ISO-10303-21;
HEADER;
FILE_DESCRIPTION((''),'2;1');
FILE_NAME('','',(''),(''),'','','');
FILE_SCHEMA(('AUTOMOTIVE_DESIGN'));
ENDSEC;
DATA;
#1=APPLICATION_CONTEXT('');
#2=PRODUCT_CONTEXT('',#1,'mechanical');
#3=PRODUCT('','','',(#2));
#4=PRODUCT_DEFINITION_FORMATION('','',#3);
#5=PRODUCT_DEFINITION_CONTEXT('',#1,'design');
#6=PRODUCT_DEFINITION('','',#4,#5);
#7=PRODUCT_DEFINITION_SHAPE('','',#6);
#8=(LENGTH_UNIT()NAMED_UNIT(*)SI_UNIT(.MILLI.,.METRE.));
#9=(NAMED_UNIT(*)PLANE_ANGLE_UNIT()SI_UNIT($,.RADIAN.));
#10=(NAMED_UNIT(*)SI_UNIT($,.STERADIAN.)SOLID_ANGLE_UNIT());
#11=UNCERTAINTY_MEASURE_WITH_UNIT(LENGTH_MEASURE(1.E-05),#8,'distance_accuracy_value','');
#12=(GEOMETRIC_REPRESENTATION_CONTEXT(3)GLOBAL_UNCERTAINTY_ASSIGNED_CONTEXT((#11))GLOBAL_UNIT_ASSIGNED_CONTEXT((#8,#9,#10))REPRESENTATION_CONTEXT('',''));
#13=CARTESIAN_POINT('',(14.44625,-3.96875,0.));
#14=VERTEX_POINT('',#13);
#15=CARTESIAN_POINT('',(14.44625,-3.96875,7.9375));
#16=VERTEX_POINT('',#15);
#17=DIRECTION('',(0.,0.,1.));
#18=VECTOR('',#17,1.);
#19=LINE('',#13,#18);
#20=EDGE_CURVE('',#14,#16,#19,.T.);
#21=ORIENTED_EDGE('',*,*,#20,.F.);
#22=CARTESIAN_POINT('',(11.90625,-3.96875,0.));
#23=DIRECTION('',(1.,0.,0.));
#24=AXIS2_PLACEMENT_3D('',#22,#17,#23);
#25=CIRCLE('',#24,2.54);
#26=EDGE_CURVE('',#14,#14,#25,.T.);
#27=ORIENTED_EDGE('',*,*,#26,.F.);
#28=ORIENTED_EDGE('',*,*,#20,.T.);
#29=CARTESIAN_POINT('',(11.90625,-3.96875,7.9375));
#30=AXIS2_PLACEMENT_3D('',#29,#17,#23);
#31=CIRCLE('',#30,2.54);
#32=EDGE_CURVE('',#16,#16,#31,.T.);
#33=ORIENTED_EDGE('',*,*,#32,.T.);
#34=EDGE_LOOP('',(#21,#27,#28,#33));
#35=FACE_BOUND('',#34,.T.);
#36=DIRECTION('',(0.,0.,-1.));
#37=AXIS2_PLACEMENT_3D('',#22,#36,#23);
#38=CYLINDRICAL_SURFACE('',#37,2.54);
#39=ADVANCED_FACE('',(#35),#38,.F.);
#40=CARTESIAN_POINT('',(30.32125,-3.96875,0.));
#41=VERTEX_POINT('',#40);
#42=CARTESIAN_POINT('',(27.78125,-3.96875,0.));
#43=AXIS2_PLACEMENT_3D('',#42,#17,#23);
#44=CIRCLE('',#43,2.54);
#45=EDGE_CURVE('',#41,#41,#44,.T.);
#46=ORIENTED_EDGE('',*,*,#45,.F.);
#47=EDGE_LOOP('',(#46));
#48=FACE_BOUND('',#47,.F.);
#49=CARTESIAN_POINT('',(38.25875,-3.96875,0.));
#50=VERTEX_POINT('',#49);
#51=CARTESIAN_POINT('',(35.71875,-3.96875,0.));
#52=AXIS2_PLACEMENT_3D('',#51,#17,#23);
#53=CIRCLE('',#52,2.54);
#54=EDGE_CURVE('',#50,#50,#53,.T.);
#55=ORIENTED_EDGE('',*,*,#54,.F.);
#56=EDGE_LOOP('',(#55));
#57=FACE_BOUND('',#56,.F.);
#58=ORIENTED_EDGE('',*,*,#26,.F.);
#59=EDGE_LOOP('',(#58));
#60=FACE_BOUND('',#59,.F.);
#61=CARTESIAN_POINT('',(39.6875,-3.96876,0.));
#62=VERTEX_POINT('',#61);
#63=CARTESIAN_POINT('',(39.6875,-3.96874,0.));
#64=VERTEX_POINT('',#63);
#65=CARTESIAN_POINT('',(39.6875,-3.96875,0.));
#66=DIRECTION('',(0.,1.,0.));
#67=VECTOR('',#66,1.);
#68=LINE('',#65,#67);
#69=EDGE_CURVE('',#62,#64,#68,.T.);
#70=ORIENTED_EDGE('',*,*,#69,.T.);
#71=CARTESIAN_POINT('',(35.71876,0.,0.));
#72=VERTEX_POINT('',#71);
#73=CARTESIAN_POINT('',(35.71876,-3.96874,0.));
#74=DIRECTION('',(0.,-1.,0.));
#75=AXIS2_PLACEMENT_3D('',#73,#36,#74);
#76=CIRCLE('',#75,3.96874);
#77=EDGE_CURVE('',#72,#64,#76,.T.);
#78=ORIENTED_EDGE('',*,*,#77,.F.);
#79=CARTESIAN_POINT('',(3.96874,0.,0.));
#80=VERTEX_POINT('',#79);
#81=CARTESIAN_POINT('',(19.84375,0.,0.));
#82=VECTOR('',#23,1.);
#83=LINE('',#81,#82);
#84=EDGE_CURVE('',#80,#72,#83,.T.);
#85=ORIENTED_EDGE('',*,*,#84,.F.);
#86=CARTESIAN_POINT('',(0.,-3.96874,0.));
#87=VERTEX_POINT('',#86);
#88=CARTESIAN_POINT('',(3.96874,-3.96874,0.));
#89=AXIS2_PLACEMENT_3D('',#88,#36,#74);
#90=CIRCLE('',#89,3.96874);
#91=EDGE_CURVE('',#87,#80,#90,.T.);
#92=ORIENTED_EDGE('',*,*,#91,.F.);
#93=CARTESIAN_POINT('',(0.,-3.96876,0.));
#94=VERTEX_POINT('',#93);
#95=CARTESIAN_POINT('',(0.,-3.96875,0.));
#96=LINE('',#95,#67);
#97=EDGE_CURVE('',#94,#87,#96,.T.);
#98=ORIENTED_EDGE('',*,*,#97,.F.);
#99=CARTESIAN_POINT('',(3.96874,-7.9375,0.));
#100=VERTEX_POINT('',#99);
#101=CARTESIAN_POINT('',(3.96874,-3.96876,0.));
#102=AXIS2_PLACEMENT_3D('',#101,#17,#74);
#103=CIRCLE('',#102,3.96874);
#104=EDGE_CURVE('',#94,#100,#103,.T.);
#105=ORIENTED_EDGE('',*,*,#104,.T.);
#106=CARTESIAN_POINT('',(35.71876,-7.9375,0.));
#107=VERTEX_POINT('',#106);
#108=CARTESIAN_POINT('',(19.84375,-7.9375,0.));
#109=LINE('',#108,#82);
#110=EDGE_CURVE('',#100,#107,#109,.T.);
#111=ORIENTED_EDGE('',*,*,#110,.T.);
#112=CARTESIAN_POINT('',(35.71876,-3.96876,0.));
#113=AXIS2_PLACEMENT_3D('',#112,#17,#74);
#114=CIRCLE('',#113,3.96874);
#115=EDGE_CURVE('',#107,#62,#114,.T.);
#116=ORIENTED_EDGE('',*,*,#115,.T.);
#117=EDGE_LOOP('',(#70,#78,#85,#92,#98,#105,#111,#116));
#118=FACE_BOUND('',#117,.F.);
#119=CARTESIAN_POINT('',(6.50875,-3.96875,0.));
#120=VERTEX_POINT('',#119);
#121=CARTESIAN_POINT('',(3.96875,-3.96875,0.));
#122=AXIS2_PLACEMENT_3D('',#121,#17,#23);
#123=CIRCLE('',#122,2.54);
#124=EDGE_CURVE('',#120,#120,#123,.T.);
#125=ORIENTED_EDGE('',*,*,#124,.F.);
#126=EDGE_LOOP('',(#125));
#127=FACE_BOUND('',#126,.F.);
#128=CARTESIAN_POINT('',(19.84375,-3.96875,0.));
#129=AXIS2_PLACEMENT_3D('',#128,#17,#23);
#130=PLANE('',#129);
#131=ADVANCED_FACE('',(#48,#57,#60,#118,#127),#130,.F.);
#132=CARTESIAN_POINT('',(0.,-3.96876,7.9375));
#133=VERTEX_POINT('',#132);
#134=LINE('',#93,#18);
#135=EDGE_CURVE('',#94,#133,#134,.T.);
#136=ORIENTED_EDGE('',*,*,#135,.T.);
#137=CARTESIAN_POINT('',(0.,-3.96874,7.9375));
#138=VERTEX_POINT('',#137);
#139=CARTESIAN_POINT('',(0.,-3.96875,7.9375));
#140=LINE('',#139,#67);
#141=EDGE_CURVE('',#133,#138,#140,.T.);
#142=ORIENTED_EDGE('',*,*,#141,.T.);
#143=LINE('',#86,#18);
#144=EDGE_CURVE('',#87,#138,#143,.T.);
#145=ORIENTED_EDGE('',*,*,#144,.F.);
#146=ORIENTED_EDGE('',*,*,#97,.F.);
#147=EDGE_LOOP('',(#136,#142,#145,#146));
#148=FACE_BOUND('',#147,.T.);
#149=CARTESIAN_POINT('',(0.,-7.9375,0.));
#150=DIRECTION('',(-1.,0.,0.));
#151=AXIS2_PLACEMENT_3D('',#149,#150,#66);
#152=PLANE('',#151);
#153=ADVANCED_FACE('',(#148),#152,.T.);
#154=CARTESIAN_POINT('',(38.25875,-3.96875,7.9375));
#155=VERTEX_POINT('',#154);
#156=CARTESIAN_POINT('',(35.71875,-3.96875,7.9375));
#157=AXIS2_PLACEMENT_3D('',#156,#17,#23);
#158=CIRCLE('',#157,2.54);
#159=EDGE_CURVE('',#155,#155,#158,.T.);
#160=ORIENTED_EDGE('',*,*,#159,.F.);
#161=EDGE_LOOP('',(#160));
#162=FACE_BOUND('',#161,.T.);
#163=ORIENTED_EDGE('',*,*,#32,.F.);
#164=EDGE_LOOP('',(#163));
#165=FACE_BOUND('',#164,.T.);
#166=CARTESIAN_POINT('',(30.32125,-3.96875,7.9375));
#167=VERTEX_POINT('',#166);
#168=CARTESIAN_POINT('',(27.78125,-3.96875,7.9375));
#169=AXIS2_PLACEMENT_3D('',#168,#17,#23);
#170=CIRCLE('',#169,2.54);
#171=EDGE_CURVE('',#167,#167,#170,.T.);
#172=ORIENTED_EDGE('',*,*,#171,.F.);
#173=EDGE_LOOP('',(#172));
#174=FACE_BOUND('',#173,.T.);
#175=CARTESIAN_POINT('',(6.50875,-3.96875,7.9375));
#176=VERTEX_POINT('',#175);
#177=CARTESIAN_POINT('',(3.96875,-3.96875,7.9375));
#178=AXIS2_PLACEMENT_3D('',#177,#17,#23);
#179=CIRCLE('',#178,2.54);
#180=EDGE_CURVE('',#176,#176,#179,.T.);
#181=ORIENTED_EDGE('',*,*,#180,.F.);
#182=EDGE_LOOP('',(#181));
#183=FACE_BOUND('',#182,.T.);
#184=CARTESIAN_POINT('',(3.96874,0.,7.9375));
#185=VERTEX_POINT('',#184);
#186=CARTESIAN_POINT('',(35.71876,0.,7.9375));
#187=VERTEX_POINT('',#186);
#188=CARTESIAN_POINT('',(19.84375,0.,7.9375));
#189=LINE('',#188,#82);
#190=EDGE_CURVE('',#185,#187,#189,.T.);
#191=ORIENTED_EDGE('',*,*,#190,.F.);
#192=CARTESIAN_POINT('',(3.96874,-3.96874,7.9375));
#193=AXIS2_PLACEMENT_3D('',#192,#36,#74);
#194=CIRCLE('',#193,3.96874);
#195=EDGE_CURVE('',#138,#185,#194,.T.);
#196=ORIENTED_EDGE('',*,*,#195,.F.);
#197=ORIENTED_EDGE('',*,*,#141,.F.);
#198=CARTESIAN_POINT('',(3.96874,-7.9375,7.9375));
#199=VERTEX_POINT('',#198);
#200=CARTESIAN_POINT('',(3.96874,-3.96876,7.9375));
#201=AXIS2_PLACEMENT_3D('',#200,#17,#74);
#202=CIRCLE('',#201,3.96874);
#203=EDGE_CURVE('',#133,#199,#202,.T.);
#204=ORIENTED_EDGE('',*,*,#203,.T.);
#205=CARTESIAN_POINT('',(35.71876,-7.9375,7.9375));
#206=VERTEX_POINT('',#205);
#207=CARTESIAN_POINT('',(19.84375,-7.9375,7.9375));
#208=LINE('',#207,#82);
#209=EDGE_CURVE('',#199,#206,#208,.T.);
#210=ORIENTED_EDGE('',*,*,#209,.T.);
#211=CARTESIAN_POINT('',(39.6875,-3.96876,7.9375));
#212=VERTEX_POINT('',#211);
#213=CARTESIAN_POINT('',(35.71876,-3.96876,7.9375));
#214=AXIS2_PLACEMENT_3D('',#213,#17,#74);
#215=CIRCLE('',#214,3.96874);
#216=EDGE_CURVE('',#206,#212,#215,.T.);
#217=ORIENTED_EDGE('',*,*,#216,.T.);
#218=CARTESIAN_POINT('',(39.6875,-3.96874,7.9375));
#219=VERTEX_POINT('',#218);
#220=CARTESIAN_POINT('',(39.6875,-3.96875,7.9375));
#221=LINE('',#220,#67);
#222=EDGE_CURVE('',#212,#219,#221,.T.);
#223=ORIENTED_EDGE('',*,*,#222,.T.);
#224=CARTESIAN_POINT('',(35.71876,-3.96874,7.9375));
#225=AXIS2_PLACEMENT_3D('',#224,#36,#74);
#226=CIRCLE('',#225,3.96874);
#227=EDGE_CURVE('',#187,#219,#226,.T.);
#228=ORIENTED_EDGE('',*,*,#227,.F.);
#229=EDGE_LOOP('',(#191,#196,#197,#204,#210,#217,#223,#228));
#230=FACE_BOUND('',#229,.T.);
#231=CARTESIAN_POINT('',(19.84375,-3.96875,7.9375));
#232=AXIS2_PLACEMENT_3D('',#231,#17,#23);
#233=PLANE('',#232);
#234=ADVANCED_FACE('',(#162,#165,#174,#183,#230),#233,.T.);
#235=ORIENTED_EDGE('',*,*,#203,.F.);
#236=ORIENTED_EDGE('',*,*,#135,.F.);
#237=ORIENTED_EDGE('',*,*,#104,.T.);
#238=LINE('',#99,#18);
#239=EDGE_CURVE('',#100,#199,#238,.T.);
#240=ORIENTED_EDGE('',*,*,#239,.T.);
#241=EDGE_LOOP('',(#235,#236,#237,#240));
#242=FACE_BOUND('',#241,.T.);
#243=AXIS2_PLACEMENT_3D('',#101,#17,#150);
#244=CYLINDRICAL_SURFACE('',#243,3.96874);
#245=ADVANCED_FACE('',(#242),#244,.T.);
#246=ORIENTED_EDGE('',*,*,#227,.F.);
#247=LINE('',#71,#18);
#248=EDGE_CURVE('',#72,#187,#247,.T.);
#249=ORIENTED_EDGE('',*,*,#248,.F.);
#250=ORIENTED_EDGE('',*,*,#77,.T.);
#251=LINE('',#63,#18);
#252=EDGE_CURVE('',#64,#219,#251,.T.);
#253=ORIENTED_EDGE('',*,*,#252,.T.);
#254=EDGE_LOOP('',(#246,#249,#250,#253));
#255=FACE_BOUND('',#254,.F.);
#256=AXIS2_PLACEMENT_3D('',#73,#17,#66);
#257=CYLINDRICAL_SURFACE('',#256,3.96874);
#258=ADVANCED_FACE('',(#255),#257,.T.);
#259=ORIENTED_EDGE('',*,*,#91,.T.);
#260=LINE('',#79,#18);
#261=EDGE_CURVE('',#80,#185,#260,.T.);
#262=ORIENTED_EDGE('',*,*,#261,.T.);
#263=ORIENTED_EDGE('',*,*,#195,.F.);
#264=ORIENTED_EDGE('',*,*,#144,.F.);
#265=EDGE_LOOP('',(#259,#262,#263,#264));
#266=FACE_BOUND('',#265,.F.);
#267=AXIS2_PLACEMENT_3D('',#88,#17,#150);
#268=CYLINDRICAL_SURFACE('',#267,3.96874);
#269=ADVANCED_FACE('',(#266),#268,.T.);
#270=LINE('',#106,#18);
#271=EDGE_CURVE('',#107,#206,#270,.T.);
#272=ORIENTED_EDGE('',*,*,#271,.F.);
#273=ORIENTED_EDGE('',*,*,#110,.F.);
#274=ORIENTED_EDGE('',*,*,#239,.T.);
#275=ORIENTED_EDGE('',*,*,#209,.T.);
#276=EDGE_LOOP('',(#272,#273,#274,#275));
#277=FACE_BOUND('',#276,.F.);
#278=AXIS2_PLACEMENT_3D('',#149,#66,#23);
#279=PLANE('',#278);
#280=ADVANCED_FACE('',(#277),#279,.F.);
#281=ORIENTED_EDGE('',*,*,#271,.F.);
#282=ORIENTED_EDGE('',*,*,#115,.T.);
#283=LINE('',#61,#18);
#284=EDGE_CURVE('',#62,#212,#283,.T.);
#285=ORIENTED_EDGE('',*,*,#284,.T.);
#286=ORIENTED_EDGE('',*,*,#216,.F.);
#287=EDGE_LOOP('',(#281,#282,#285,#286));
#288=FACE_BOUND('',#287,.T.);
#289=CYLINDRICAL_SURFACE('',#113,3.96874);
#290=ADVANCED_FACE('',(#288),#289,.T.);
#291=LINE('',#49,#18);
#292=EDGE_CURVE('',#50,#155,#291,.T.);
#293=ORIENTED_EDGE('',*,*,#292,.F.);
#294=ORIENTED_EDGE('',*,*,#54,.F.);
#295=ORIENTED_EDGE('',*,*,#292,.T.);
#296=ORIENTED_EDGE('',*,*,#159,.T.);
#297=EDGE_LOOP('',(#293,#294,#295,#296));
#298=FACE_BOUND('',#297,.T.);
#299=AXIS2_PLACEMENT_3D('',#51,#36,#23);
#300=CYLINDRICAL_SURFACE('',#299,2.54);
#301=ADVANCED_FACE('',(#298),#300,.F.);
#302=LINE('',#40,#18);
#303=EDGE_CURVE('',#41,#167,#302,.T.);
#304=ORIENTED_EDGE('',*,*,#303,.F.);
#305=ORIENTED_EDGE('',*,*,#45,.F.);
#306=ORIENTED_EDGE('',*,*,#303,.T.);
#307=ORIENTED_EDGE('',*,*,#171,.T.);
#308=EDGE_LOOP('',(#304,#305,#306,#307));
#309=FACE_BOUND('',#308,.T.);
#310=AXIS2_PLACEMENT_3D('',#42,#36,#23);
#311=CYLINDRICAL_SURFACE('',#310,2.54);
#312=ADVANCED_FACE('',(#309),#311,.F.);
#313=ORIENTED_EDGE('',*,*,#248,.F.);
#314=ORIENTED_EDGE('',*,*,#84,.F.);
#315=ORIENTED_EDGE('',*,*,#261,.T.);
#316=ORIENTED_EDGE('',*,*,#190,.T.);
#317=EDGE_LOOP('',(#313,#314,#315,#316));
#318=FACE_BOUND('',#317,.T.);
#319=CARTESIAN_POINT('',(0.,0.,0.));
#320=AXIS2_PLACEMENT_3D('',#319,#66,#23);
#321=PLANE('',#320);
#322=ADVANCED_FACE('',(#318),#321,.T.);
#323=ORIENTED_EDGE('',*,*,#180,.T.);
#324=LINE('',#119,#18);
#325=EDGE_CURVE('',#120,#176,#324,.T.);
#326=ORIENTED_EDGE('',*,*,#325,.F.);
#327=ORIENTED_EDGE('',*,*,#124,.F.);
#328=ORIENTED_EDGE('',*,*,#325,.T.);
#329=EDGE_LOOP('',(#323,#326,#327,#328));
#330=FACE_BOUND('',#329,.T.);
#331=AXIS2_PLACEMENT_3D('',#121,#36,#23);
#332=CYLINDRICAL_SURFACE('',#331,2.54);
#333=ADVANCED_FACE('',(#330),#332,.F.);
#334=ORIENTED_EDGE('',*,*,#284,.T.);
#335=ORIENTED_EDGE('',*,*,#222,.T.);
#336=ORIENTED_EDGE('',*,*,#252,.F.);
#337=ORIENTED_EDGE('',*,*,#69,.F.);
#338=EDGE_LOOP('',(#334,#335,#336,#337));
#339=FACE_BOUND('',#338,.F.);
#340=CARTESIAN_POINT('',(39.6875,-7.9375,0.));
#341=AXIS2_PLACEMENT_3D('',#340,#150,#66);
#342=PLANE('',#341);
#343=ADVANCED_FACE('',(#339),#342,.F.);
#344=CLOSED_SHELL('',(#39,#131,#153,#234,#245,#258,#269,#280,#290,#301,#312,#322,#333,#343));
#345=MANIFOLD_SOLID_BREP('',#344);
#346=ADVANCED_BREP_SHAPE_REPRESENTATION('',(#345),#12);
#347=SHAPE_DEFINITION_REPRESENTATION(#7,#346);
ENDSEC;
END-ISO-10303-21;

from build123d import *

# Parameters (mm, degrees)
F0_W     = 39.6875
F0_H     = 7.9375
F0_R     = 2.54
F1_DEPTH = 7.9375
F2_R     = 3.96874


# Not quite as in the source:
# - a fillet or chamfer is up to 0.001 mm smaller than in the source, because OpenCascade refuses the exact size


with BuildPart() as f1:
    # F0 (on Top) → F1 (new body)
    with BuildSketch(Plane.XY):
        with Locations((19.84375, -3.96875)):
            Rectangle(F0_W, F0_H)
        with Locations((3.96875, -3.96875)):
            Circle(F0_R, mode=Mode.SUBTRACT)
        with Locations((11.90625, -3.96875)):
            Circle(F0_R, mode=Mode.SUBTRACT)
        with Locations((27.78125, -3.96875)):
            Circle(F0_R, mode=Mode.SUBTRACT)
        with Locations((35.71875, -3.96875)):
            Circle(F0_R, mode=Mode.SUBTRACT)
    extrude(amount=F1_DEPTH)

    # F2 (radius 3.96875 in the source; OpenCascade refuses exactly that, so slightly less here)
    f2_edges = [f1.edges().sort_by_distance(p)[0] for p in [
        (0, 0, 3.96875),
        (0, -7.9375, 3.96875),
        (39.6875, -7.9375, 3.96875),
        (39.6875, 0, 3.96875),
    ]]
    fillet(f2_edges, radius=F2_R)


solid = f1.part
